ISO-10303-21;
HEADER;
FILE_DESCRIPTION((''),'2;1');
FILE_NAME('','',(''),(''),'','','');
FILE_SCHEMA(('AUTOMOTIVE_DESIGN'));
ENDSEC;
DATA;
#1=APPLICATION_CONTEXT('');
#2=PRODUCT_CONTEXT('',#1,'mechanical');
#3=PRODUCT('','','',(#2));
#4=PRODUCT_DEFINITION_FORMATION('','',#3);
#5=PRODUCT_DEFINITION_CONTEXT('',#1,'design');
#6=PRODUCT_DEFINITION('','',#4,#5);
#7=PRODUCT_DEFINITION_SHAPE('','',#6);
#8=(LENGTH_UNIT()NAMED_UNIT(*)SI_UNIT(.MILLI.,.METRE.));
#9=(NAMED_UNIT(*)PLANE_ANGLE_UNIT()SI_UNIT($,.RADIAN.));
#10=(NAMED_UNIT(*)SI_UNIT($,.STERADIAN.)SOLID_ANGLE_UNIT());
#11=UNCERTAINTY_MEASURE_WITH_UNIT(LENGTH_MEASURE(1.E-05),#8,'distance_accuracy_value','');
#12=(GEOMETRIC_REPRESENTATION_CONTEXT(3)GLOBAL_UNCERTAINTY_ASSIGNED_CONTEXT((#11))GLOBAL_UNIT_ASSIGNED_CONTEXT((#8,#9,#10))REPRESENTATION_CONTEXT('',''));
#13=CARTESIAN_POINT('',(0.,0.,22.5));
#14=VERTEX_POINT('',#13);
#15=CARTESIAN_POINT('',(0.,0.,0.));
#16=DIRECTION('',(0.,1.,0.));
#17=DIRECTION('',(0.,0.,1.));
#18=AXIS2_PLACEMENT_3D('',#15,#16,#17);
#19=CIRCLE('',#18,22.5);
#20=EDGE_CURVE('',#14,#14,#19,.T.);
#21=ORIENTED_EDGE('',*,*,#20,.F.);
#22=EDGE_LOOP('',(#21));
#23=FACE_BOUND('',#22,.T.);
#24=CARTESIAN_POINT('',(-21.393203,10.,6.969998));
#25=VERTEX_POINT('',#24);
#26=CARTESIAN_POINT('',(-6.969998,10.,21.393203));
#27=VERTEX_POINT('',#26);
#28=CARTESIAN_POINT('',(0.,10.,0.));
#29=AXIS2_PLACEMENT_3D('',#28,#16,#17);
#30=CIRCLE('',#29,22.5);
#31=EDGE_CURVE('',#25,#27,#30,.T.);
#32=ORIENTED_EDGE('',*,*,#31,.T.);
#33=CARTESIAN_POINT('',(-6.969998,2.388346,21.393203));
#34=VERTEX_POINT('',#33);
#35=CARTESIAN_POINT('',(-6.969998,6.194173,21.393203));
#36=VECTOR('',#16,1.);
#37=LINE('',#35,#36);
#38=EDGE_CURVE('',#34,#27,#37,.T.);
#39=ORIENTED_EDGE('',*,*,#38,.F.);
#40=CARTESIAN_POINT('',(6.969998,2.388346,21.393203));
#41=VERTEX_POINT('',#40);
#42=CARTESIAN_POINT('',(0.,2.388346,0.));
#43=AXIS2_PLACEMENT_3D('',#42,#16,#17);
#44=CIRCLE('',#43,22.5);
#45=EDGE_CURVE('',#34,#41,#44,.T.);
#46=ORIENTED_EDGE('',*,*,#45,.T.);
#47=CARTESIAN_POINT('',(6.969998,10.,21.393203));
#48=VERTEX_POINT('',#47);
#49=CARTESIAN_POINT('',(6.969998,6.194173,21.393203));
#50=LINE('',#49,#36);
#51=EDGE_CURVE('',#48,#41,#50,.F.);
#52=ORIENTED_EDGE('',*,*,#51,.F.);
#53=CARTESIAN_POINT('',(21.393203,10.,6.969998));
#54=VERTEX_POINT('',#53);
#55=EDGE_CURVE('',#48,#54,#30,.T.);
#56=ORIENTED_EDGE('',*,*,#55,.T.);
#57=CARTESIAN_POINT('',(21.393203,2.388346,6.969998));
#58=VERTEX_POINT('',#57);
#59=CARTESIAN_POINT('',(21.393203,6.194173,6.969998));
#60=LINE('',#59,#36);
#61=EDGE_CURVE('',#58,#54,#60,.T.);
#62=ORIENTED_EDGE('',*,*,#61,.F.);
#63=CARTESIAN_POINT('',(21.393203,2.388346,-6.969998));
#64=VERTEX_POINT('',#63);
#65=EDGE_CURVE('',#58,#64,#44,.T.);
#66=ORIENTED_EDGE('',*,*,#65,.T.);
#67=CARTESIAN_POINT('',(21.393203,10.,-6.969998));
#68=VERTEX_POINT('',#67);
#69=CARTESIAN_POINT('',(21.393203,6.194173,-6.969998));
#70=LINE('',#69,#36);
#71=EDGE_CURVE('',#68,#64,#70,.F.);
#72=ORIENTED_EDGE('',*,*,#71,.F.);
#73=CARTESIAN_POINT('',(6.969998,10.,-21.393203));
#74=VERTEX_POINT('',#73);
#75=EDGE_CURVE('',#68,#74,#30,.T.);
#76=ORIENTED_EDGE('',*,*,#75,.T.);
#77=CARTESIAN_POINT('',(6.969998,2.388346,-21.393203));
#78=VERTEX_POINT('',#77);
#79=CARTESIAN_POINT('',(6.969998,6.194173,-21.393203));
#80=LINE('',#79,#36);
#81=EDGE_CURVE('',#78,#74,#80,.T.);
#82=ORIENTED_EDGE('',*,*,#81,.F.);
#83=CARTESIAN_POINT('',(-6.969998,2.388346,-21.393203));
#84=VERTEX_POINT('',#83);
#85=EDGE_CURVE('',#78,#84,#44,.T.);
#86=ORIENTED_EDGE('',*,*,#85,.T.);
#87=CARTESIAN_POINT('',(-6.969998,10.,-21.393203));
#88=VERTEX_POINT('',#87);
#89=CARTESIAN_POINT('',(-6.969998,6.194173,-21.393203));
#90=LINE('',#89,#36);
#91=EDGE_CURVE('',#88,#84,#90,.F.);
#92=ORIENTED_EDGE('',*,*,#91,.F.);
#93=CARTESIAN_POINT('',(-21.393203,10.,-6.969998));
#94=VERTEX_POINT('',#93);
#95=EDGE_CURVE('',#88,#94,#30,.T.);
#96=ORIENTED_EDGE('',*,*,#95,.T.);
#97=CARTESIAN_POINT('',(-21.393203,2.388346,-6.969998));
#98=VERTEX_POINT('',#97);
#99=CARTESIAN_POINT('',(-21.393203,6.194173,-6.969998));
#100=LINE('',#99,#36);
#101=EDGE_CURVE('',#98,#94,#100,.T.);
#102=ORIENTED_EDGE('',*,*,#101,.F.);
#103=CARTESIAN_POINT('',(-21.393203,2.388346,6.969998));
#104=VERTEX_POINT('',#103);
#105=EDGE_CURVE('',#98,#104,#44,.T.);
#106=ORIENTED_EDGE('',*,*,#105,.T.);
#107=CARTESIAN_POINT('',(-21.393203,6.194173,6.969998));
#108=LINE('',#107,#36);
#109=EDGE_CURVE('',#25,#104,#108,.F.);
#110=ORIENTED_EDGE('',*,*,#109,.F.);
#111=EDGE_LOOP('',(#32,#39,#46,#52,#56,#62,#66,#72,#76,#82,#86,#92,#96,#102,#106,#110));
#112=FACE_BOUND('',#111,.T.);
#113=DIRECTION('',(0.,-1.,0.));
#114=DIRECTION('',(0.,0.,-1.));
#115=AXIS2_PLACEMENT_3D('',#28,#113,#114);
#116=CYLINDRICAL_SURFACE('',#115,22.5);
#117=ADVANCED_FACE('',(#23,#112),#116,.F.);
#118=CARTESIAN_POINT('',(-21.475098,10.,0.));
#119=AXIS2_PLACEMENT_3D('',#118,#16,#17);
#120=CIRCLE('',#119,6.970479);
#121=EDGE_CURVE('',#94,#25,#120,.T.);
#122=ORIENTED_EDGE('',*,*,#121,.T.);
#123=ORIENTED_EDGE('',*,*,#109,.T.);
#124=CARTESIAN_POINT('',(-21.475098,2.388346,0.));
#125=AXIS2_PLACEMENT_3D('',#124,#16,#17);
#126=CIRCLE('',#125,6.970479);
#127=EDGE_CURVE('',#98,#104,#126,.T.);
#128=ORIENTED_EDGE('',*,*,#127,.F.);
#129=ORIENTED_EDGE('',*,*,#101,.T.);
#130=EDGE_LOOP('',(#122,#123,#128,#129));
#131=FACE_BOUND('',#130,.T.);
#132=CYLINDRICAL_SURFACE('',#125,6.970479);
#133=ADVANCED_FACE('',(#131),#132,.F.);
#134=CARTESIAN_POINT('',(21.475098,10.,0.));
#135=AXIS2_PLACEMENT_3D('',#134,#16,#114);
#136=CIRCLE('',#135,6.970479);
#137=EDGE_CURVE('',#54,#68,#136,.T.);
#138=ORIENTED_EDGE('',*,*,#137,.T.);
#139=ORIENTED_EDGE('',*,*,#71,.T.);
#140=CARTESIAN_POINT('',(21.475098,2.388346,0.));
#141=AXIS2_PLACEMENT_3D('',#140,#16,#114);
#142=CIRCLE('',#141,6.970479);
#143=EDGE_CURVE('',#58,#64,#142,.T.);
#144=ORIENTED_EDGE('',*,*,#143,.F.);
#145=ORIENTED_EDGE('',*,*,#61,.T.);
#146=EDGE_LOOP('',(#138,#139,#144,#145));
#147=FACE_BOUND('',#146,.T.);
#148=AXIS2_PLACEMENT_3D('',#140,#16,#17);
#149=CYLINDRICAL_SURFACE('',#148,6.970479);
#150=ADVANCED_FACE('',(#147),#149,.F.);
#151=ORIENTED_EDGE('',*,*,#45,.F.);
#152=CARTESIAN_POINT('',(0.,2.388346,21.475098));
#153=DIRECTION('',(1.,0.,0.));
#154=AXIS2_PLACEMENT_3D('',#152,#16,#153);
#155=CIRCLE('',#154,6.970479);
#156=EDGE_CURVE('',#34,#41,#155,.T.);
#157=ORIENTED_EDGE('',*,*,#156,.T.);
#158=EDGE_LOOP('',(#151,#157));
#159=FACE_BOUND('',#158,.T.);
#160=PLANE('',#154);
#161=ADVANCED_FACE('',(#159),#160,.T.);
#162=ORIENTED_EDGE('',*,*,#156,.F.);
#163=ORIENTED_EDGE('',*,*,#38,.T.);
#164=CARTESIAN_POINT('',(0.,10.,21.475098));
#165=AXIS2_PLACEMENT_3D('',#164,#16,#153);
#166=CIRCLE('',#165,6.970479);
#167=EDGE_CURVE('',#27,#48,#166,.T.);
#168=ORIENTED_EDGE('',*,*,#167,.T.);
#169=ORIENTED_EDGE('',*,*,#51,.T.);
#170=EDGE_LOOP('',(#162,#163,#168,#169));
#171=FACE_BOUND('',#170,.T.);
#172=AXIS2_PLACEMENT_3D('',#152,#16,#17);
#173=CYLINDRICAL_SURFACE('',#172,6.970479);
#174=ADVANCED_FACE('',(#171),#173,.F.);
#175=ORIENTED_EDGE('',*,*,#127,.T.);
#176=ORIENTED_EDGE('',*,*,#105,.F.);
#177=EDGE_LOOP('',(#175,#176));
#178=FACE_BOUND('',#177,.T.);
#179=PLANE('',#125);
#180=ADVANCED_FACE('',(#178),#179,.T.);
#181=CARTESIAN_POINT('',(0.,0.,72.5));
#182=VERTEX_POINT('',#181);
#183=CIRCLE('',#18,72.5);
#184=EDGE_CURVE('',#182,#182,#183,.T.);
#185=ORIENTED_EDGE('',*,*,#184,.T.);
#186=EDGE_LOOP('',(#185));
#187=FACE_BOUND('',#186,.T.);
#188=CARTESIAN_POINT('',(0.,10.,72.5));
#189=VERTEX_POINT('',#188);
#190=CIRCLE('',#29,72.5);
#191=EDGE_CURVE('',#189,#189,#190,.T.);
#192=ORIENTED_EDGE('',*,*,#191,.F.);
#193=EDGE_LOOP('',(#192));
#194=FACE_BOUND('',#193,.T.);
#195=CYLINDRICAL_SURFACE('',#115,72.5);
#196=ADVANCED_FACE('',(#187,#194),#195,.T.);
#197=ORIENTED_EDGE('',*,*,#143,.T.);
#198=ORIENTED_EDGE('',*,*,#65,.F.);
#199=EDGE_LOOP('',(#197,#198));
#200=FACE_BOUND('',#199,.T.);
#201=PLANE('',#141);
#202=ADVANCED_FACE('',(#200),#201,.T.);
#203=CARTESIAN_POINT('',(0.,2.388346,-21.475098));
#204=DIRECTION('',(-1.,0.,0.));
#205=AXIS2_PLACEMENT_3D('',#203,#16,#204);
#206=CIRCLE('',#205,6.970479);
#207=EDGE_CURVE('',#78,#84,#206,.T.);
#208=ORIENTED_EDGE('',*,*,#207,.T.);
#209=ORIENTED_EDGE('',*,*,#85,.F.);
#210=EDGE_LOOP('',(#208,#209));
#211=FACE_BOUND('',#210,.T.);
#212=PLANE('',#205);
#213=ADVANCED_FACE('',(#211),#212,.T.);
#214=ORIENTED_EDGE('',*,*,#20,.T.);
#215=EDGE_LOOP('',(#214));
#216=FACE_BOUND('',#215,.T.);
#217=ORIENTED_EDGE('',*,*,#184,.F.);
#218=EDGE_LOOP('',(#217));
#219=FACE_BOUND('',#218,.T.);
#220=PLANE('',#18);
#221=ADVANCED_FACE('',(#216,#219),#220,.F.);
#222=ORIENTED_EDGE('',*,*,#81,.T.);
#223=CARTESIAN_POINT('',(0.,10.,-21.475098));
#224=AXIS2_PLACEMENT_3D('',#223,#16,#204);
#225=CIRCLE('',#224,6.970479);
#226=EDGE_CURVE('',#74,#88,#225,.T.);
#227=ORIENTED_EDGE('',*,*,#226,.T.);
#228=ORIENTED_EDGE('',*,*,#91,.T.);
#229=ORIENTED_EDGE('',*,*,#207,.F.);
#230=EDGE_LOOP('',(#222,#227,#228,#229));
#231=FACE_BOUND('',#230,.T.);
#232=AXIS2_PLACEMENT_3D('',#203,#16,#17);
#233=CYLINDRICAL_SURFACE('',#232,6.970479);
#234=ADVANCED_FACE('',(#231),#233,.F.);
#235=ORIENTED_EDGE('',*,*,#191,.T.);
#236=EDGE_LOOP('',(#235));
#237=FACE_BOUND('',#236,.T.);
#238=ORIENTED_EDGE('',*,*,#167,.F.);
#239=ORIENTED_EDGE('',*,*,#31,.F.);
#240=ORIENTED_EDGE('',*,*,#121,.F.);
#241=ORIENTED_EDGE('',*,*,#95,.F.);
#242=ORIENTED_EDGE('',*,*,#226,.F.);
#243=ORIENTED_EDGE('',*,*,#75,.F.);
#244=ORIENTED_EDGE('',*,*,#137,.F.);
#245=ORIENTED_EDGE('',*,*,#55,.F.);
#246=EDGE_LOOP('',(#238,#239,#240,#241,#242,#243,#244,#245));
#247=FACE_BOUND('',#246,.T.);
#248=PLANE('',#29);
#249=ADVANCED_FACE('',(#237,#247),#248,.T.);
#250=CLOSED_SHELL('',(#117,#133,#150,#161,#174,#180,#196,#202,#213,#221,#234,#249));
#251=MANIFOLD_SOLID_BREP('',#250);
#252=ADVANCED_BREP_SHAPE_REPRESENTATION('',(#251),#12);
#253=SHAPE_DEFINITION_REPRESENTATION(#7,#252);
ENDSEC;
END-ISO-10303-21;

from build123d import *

# Parameters (mm, degrees)
SKETCH1_R           = 72.5
BOSS_EXTRUDE1_DEPTH = 10
SKETCH2_R           = 22.5
CUT_EXTRUDE1_DEPTH  = 104.01698889
SKETCH3_R           = 6.970478639
CUT_EXTRUDE2_DEPTH  = 7.611654329
CIRPATTERN1_COUNT   = 4


with BuildPart() as part:
    # Sketch1 → Boss-Extrude1 (new body)
    with BuildSketch(Plane(origin=(0, 0, 0), x_dir=(1, 0, 0), z_dir=(0, 1, 0))):
        Circle(SKETCH1_R)
    extrude(amount=BOSS_EXTRUDE1_DEPTH)

    # Sketch2 → Cut-Extrude1 (cut, through all)
    with BuildSketch(Plane(origin=(0, 0, 0), x_dir=(1, 0, 0), z_dir=(0, 1, 0))):
        Circle(SKETCH2_R)
    extrude(amount=CUT_EXTRUDE1_DEPTH, mode=Mode.SUBTRACT)

    # Sketch3 → Cut-Extrude2 (cut)
    with BuildSketch(Plane(origin=(0, 10, 0), x_dir=(1, 0, 0), z_dir=(0, 1, 0))):
        with Locations((-21.475098113, 0)):
            Circle(SKETCH3_R)
    cut_extrude2 = extrude(amount=-CUT_EXTRUDE2_DEPTH, mode=Mode.SUBTRACT)

    # CirPattern1: Cut-Extrude2 ×4 about axis
    cirpattern1_axis = Axis((0, 0, 0), (0, 1, 0))
    for i in range(1, CIRPATTERN1_COUNT):
        add(cut_extrude2.rotate(cirpattern1_axis, i * 360 / CIRPATTERN1_COUNT), mode=Mode.SUBTRACT)


solid = part.part
